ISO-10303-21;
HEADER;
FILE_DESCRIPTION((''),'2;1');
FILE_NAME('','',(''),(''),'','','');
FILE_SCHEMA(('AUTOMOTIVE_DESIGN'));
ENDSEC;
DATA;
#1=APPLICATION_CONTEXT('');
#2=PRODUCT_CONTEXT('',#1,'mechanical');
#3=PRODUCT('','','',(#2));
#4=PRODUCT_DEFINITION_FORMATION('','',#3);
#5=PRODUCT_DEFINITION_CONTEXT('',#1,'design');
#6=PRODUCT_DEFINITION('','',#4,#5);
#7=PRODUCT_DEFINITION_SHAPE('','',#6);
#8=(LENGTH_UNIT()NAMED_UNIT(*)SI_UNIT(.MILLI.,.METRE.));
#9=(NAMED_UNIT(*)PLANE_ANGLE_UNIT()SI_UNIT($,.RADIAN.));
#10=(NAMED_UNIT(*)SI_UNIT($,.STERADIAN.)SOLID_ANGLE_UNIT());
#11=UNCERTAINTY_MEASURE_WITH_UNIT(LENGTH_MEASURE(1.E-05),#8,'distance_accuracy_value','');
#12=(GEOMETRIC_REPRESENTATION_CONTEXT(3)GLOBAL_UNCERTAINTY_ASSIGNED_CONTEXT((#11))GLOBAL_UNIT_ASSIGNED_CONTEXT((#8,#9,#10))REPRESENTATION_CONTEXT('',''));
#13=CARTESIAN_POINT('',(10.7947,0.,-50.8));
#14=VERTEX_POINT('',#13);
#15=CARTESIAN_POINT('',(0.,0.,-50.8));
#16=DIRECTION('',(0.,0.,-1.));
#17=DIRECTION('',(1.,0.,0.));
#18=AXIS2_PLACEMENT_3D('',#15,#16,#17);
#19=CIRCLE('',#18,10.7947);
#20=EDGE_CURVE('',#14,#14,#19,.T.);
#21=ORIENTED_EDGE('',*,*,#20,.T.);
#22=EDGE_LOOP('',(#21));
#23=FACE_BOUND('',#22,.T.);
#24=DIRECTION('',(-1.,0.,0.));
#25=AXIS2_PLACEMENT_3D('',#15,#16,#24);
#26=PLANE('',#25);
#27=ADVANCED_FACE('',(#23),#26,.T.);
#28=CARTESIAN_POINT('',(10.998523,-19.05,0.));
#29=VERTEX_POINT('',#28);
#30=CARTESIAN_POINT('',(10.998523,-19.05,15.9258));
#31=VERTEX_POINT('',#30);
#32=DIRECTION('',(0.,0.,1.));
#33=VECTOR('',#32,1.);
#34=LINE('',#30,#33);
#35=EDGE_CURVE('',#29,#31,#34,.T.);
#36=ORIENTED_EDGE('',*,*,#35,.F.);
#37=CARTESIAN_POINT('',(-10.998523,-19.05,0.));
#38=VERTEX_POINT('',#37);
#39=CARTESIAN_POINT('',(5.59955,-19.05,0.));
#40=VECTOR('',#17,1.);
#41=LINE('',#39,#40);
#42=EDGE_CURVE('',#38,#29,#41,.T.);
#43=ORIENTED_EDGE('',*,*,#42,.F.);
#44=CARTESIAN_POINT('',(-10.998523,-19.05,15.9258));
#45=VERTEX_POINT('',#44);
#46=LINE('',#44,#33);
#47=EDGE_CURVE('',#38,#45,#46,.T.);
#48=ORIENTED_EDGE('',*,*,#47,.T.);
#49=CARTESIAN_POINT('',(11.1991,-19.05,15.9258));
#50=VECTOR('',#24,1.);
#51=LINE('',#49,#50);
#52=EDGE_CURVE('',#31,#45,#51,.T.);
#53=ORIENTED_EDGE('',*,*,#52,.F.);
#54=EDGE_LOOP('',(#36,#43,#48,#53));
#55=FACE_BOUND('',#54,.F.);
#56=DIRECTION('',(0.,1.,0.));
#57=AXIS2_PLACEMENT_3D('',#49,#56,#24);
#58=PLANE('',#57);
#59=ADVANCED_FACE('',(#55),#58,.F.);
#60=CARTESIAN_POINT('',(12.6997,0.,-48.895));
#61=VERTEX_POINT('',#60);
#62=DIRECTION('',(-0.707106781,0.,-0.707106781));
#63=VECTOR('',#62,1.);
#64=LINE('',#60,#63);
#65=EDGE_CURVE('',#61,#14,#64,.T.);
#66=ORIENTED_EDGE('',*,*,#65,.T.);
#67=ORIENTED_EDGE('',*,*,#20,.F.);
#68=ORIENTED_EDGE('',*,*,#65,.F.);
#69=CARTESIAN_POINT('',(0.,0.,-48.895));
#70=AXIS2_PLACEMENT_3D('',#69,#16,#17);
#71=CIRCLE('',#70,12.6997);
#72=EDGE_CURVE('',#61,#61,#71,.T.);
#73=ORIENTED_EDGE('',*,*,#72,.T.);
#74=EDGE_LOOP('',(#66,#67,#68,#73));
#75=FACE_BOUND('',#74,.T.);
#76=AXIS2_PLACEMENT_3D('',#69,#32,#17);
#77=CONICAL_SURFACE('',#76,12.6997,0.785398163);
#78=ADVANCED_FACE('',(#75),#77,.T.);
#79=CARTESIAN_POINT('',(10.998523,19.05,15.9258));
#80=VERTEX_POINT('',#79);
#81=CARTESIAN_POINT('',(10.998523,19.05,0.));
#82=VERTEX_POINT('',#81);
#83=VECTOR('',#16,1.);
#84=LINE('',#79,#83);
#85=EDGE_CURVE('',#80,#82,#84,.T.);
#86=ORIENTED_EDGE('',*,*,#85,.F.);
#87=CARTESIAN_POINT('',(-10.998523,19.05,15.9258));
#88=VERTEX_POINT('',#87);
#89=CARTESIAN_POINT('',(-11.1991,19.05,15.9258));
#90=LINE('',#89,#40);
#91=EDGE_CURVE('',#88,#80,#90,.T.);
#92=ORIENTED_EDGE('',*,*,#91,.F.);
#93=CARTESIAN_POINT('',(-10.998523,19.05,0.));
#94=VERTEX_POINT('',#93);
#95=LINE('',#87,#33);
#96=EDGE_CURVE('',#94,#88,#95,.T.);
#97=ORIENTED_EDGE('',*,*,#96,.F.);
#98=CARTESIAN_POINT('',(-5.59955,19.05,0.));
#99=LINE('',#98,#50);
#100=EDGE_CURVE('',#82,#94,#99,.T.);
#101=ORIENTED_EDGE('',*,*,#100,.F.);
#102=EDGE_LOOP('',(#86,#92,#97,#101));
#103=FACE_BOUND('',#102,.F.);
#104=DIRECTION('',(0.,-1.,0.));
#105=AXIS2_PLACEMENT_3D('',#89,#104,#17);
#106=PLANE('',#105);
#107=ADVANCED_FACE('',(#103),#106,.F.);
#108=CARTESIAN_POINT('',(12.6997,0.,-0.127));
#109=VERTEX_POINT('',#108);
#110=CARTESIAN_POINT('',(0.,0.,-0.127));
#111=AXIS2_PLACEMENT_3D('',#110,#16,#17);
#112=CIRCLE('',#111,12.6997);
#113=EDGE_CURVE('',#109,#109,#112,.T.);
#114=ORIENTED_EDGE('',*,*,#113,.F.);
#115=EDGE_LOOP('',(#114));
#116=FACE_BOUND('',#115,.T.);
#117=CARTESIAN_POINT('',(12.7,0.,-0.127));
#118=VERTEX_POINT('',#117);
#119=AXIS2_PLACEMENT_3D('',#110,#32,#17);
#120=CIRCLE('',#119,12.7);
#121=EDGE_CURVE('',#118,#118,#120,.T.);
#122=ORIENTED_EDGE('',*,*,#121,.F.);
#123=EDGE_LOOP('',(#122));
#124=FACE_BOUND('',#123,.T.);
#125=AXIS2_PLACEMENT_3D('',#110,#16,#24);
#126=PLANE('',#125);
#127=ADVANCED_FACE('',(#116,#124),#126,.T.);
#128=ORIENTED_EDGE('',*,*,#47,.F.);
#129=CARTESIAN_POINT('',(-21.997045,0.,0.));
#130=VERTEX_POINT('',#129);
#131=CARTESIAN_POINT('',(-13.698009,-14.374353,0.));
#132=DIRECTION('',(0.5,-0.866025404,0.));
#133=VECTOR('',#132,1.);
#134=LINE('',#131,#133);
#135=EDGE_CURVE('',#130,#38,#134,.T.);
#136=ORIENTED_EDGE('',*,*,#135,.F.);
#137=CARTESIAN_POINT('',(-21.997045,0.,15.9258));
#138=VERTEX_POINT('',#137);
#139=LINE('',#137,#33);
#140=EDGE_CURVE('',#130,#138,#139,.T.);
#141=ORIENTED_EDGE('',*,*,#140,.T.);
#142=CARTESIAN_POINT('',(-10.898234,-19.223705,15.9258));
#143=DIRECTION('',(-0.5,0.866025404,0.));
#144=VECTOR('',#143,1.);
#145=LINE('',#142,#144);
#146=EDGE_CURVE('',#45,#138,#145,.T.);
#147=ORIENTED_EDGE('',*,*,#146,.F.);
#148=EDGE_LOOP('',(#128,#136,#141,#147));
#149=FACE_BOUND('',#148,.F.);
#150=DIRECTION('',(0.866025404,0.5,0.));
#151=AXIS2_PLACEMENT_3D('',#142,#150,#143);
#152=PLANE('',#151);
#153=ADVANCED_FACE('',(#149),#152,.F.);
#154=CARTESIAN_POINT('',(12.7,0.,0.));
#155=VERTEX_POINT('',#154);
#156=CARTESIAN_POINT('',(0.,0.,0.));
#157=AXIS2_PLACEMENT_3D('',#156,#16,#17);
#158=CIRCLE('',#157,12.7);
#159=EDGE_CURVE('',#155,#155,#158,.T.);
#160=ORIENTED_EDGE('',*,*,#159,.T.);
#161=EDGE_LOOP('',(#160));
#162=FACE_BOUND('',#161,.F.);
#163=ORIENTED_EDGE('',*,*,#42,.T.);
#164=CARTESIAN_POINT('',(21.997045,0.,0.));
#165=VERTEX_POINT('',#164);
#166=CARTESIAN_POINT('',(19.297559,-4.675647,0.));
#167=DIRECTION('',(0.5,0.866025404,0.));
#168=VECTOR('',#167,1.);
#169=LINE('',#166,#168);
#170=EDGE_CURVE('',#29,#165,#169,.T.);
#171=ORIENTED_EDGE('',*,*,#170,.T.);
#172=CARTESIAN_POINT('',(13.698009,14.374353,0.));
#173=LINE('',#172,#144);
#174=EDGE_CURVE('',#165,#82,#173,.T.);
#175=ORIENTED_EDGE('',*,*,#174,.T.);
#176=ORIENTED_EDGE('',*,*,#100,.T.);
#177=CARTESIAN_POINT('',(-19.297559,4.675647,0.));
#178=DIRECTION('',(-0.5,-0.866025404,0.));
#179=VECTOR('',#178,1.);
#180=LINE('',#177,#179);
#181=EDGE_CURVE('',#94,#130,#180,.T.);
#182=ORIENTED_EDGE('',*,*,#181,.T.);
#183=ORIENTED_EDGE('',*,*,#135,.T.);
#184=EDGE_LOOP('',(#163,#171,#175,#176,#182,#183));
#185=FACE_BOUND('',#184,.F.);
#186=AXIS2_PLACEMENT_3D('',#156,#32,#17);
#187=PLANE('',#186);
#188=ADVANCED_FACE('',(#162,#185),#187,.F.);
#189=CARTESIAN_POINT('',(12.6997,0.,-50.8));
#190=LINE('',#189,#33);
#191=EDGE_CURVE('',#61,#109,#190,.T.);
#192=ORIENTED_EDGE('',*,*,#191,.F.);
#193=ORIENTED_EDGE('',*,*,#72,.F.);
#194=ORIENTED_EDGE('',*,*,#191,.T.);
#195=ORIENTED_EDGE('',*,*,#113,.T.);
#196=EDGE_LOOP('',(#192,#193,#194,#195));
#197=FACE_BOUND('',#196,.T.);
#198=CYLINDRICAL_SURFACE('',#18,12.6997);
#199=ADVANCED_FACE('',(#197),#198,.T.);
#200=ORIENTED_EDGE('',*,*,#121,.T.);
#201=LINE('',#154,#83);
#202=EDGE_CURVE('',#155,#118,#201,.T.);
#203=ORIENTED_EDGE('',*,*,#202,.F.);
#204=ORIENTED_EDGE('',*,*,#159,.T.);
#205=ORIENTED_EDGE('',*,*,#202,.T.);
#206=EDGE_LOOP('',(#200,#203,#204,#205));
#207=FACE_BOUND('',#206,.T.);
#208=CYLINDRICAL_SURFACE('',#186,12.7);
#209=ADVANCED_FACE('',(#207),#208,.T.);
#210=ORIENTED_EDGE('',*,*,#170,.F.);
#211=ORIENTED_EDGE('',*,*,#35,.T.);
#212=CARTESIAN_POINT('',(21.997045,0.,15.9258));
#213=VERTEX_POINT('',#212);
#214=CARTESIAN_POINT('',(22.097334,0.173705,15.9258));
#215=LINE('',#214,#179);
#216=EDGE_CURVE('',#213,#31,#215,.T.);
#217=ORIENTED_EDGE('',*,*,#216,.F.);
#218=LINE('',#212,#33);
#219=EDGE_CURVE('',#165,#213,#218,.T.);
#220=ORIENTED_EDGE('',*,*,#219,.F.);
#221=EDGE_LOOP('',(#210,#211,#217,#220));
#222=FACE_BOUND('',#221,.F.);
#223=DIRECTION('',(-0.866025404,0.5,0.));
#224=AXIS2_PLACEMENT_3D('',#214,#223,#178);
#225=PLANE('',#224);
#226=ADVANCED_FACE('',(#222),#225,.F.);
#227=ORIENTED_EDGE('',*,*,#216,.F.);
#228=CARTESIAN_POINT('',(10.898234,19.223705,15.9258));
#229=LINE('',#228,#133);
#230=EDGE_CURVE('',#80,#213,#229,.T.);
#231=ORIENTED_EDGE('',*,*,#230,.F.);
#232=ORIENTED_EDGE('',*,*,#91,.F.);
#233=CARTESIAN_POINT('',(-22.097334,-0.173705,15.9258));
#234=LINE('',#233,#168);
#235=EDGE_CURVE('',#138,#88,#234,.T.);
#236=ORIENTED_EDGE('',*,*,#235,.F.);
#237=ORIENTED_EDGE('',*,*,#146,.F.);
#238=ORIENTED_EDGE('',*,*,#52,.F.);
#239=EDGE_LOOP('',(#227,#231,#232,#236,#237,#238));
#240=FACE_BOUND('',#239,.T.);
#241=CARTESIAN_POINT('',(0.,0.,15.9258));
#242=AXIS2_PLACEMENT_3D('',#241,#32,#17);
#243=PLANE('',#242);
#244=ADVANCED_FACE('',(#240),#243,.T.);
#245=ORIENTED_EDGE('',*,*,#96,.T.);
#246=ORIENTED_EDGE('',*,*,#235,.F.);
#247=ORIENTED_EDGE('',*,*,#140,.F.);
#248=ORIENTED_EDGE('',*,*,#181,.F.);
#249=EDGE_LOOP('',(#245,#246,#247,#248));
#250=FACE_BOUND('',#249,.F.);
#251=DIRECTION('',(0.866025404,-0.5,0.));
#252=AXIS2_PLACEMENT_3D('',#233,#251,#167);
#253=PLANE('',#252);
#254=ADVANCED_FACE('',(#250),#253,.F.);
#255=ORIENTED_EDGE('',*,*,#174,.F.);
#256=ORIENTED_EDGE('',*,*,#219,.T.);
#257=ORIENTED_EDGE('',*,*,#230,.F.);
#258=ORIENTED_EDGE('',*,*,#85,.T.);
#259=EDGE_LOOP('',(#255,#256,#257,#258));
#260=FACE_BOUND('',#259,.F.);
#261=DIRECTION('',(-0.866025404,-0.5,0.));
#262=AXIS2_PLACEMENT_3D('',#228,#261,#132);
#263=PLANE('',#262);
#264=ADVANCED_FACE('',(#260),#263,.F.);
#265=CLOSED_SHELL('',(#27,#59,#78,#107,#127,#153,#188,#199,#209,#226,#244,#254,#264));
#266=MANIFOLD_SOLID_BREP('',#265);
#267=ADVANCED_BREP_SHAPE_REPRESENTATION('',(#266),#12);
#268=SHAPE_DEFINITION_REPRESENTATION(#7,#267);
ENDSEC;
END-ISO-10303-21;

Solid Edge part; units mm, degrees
sketch "Sketch1" plane through (0, 0, 0) normal (0, 0, 1) x (1, 0, 0)
  circle A0 centre (0, 0) radius 22.098
  dimension "D1" = 44.196
extrude "Protrusion1" add sketch "Sketch1" along normal blind 15.9258
sketch "Sketch2" plane through (0, 0, 0) normal (0, 0, -1) x (1, 0, 0)
  circle A0 centre (0, 0) radius 12.7
extrude "Protrusion2" add sketch "Sketch2" along normal blind 50.8
sketch "Sketch3" plane through (0, 0, -50.8) normal (0, 0, -1) x (1, 0, 0)
  circle A0 centre (0, 0) radius 12.6997
extrude "Cutout1" cut sketch "Sketch3" against normal blind 50.673 flip side to cut
chamfer "Chamfer_1" distance 1.905 angle 45 1 edges at (-12.6997, 0, -50.8)
sketch "Sketch4" plane through (0, 0, 15.9258) normal (0, 0, 1) x (1, 0, 0)
  line L0 (-11.1991, 19.05) -> (11.1991, 19.05)
  dimension "D1" = 38.1
extrude "Cutout2" cut sketch "Sketch4" against normal up to next material side at (0, 19.1, 15.9258)
pattern_circular "Pattern1" count 6 over 360 about axis through (0, 0, 15.9258) along (0, 0, 1) of "Cutout2"
properties part number "115960"
